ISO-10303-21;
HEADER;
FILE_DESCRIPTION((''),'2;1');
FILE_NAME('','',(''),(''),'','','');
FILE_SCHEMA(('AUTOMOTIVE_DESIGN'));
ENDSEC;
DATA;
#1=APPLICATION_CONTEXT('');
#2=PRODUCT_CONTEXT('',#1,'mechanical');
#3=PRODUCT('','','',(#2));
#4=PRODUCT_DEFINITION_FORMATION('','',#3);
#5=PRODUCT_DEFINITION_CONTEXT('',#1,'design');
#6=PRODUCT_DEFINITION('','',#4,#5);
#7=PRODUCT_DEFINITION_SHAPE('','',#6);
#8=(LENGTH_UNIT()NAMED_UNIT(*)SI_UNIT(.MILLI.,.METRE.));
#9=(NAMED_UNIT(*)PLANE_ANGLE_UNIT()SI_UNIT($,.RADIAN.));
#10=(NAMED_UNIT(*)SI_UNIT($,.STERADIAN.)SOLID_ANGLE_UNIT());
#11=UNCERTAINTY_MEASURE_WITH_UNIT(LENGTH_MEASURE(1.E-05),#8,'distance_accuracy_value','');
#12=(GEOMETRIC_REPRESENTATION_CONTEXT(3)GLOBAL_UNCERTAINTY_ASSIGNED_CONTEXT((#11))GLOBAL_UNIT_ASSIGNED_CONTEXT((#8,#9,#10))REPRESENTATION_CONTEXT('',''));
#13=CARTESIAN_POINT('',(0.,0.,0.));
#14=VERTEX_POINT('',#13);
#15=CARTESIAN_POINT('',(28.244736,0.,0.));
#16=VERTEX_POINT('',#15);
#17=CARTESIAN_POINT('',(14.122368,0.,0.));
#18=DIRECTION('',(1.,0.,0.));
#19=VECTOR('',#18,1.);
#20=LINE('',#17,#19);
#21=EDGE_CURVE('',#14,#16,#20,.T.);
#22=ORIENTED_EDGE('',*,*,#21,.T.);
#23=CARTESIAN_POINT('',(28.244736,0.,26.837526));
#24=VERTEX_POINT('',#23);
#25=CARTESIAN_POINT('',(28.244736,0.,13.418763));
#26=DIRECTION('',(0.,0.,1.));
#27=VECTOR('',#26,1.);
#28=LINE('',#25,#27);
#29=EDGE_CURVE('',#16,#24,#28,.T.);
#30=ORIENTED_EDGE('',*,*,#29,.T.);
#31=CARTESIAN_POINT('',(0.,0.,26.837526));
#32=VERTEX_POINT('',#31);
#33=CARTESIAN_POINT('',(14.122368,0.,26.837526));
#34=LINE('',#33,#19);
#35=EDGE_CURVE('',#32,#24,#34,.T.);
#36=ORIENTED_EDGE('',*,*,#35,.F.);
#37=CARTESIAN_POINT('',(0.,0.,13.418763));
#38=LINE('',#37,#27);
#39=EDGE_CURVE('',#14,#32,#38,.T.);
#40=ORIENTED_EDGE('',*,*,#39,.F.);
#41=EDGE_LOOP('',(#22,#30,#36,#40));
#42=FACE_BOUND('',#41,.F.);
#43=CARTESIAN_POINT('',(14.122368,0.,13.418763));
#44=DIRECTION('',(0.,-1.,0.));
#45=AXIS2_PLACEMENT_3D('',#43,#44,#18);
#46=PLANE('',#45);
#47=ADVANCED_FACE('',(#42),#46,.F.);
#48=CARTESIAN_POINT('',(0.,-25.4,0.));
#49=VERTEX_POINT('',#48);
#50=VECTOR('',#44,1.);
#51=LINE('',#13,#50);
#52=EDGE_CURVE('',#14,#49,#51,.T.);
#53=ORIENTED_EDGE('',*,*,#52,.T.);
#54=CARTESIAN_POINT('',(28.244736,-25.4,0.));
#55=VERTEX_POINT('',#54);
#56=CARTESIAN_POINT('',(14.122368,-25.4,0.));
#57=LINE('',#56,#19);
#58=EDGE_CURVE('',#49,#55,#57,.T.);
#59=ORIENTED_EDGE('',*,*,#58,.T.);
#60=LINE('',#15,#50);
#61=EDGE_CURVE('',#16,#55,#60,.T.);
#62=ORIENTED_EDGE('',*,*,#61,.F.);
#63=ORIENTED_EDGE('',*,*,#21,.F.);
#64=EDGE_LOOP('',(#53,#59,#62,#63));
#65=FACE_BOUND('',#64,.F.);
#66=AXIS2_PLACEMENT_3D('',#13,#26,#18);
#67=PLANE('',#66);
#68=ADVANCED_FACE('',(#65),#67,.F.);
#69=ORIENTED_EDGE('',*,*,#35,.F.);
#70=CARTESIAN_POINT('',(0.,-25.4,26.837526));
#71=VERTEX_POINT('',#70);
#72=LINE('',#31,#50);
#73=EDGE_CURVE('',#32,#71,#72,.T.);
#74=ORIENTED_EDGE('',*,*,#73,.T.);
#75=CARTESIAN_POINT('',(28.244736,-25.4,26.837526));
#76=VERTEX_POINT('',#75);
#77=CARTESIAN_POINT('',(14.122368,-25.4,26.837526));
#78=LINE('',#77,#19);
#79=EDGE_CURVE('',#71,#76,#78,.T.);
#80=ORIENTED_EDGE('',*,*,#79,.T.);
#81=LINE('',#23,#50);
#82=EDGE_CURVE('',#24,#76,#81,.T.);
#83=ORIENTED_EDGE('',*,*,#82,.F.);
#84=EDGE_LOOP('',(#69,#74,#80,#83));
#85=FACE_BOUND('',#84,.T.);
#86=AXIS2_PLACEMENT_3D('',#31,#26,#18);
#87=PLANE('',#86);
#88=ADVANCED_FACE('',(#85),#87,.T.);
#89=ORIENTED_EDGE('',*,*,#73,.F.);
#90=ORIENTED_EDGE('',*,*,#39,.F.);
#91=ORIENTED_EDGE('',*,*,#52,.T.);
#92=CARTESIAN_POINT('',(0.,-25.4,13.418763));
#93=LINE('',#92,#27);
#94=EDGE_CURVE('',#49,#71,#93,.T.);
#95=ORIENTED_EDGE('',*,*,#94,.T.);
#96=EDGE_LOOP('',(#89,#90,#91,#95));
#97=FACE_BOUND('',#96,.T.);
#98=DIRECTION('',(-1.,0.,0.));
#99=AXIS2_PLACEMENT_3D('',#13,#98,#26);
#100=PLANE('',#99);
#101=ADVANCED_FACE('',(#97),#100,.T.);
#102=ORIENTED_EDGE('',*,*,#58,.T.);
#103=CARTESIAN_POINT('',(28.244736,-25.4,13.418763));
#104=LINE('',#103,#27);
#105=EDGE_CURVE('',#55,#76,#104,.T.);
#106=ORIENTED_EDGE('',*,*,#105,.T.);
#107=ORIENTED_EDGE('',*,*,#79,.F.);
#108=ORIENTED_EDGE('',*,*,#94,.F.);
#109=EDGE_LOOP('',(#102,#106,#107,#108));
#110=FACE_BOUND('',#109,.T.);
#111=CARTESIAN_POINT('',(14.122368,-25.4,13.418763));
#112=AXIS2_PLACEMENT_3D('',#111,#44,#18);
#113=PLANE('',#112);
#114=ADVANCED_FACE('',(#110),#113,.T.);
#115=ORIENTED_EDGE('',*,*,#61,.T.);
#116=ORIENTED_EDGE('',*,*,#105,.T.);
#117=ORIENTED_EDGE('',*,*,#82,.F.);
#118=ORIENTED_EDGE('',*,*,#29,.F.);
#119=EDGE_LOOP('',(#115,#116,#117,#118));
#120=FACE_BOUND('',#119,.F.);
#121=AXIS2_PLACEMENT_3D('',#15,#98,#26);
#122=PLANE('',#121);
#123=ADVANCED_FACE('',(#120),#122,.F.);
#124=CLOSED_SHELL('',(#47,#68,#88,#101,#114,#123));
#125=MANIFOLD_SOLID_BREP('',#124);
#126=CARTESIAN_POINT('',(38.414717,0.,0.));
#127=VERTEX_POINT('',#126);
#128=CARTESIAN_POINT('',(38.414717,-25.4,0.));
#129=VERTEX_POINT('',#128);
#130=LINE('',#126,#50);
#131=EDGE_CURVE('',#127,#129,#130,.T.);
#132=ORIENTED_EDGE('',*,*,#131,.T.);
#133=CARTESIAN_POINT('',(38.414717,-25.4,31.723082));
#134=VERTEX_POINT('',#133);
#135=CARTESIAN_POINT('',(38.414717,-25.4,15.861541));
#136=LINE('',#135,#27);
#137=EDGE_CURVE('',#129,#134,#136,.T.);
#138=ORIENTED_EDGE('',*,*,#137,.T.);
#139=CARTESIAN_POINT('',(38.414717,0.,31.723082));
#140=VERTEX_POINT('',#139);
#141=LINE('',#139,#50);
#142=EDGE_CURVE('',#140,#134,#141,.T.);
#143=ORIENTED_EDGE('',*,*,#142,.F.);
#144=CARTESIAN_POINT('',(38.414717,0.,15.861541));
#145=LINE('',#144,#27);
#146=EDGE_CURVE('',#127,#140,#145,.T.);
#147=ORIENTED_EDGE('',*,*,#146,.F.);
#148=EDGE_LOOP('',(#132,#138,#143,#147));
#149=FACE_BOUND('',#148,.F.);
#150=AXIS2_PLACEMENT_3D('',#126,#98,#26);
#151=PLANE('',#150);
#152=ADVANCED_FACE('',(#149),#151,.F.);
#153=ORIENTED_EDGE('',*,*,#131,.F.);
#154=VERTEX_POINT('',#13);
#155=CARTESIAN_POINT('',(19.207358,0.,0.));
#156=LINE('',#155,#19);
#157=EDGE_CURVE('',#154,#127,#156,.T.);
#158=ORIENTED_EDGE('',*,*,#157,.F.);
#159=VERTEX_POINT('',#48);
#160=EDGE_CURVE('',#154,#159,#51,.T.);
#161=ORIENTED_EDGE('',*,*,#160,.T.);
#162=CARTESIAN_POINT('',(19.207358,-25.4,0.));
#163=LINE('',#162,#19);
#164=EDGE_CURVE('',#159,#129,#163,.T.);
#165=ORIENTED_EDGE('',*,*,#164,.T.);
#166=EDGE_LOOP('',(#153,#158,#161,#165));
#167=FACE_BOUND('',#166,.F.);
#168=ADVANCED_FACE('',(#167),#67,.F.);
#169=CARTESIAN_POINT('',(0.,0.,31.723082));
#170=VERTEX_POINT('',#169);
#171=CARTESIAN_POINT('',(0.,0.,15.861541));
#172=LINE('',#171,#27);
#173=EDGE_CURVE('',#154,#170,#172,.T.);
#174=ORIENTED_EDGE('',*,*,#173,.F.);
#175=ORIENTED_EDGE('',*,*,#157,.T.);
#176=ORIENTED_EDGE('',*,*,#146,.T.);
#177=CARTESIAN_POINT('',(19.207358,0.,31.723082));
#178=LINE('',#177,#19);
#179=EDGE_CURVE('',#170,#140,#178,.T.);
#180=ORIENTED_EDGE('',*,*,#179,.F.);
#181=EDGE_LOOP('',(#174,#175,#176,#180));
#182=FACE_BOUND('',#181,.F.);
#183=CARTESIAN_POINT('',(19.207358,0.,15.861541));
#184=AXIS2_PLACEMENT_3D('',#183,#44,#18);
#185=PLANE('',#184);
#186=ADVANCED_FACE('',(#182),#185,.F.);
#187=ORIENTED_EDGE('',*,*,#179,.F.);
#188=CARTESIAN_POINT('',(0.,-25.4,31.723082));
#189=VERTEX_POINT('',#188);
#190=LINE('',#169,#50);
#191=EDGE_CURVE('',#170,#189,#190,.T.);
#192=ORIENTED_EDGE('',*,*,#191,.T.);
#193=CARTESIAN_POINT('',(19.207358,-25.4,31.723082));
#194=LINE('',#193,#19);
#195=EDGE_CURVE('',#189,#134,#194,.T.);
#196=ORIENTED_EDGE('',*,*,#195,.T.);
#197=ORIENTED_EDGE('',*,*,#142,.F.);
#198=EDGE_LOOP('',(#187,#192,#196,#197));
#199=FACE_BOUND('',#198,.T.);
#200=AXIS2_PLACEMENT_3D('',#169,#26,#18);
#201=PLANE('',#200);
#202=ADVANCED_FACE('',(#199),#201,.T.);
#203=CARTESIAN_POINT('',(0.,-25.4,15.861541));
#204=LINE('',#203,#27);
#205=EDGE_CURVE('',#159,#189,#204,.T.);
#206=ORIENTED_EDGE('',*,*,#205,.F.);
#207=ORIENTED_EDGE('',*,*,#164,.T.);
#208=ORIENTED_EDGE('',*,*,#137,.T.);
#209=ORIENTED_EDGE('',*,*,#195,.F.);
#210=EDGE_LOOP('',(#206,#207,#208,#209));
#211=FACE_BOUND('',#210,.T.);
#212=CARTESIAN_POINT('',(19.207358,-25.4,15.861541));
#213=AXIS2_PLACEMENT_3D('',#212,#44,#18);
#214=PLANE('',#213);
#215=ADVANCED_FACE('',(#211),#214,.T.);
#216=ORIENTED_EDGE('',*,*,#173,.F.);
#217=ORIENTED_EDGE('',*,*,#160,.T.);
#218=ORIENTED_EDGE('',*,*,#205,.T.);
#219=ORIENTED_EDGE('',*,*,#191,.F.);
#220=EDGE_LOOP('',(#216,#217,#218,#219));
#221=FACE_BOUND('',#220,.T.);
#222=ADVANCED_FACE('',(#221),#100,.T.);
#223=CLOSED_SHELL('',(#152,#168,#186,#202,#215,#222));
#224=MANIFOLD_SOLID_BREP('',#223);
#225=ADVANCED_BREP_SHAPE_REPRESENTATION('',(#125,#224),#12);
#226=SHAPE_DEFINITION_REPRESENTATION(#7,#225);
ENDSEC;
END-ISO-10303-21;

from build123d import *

# Parameters (mm, degrees)
F0_W     = 28.2447356731
F0_H     = 26.8375258893
F2_DEPTH = 25.4
F1_W     = 38.4147167206
F1_H     = 31.7230820656
F3_DEPTH = 25.4


# Not quite as in the source:
# - a feature of the source that left no trace in its solid (it failed there, or was rolled back) is left out


with BuildPart() as f2:
    # F0 (on Front) → F2 (new body)
    with BuildSketch(Plane.XZ):
        with Locations((14.1223678365, 13.4187629446)):
            Rectangle(F0_W, F0_H)
    extrude(amount=F2_DEPTH)


with BuildPart() as f3:
    # F1 (on Front) → F3 (new body)
    with BuildSketch(Plane.XZ):
        with Locations((19.2073583603, 15.8615410328)):
            Rectangle(F1_W, F1_H)
    extrude(amount=F3_DEPTH)


solid = Compound([f2.part, f3.part])
